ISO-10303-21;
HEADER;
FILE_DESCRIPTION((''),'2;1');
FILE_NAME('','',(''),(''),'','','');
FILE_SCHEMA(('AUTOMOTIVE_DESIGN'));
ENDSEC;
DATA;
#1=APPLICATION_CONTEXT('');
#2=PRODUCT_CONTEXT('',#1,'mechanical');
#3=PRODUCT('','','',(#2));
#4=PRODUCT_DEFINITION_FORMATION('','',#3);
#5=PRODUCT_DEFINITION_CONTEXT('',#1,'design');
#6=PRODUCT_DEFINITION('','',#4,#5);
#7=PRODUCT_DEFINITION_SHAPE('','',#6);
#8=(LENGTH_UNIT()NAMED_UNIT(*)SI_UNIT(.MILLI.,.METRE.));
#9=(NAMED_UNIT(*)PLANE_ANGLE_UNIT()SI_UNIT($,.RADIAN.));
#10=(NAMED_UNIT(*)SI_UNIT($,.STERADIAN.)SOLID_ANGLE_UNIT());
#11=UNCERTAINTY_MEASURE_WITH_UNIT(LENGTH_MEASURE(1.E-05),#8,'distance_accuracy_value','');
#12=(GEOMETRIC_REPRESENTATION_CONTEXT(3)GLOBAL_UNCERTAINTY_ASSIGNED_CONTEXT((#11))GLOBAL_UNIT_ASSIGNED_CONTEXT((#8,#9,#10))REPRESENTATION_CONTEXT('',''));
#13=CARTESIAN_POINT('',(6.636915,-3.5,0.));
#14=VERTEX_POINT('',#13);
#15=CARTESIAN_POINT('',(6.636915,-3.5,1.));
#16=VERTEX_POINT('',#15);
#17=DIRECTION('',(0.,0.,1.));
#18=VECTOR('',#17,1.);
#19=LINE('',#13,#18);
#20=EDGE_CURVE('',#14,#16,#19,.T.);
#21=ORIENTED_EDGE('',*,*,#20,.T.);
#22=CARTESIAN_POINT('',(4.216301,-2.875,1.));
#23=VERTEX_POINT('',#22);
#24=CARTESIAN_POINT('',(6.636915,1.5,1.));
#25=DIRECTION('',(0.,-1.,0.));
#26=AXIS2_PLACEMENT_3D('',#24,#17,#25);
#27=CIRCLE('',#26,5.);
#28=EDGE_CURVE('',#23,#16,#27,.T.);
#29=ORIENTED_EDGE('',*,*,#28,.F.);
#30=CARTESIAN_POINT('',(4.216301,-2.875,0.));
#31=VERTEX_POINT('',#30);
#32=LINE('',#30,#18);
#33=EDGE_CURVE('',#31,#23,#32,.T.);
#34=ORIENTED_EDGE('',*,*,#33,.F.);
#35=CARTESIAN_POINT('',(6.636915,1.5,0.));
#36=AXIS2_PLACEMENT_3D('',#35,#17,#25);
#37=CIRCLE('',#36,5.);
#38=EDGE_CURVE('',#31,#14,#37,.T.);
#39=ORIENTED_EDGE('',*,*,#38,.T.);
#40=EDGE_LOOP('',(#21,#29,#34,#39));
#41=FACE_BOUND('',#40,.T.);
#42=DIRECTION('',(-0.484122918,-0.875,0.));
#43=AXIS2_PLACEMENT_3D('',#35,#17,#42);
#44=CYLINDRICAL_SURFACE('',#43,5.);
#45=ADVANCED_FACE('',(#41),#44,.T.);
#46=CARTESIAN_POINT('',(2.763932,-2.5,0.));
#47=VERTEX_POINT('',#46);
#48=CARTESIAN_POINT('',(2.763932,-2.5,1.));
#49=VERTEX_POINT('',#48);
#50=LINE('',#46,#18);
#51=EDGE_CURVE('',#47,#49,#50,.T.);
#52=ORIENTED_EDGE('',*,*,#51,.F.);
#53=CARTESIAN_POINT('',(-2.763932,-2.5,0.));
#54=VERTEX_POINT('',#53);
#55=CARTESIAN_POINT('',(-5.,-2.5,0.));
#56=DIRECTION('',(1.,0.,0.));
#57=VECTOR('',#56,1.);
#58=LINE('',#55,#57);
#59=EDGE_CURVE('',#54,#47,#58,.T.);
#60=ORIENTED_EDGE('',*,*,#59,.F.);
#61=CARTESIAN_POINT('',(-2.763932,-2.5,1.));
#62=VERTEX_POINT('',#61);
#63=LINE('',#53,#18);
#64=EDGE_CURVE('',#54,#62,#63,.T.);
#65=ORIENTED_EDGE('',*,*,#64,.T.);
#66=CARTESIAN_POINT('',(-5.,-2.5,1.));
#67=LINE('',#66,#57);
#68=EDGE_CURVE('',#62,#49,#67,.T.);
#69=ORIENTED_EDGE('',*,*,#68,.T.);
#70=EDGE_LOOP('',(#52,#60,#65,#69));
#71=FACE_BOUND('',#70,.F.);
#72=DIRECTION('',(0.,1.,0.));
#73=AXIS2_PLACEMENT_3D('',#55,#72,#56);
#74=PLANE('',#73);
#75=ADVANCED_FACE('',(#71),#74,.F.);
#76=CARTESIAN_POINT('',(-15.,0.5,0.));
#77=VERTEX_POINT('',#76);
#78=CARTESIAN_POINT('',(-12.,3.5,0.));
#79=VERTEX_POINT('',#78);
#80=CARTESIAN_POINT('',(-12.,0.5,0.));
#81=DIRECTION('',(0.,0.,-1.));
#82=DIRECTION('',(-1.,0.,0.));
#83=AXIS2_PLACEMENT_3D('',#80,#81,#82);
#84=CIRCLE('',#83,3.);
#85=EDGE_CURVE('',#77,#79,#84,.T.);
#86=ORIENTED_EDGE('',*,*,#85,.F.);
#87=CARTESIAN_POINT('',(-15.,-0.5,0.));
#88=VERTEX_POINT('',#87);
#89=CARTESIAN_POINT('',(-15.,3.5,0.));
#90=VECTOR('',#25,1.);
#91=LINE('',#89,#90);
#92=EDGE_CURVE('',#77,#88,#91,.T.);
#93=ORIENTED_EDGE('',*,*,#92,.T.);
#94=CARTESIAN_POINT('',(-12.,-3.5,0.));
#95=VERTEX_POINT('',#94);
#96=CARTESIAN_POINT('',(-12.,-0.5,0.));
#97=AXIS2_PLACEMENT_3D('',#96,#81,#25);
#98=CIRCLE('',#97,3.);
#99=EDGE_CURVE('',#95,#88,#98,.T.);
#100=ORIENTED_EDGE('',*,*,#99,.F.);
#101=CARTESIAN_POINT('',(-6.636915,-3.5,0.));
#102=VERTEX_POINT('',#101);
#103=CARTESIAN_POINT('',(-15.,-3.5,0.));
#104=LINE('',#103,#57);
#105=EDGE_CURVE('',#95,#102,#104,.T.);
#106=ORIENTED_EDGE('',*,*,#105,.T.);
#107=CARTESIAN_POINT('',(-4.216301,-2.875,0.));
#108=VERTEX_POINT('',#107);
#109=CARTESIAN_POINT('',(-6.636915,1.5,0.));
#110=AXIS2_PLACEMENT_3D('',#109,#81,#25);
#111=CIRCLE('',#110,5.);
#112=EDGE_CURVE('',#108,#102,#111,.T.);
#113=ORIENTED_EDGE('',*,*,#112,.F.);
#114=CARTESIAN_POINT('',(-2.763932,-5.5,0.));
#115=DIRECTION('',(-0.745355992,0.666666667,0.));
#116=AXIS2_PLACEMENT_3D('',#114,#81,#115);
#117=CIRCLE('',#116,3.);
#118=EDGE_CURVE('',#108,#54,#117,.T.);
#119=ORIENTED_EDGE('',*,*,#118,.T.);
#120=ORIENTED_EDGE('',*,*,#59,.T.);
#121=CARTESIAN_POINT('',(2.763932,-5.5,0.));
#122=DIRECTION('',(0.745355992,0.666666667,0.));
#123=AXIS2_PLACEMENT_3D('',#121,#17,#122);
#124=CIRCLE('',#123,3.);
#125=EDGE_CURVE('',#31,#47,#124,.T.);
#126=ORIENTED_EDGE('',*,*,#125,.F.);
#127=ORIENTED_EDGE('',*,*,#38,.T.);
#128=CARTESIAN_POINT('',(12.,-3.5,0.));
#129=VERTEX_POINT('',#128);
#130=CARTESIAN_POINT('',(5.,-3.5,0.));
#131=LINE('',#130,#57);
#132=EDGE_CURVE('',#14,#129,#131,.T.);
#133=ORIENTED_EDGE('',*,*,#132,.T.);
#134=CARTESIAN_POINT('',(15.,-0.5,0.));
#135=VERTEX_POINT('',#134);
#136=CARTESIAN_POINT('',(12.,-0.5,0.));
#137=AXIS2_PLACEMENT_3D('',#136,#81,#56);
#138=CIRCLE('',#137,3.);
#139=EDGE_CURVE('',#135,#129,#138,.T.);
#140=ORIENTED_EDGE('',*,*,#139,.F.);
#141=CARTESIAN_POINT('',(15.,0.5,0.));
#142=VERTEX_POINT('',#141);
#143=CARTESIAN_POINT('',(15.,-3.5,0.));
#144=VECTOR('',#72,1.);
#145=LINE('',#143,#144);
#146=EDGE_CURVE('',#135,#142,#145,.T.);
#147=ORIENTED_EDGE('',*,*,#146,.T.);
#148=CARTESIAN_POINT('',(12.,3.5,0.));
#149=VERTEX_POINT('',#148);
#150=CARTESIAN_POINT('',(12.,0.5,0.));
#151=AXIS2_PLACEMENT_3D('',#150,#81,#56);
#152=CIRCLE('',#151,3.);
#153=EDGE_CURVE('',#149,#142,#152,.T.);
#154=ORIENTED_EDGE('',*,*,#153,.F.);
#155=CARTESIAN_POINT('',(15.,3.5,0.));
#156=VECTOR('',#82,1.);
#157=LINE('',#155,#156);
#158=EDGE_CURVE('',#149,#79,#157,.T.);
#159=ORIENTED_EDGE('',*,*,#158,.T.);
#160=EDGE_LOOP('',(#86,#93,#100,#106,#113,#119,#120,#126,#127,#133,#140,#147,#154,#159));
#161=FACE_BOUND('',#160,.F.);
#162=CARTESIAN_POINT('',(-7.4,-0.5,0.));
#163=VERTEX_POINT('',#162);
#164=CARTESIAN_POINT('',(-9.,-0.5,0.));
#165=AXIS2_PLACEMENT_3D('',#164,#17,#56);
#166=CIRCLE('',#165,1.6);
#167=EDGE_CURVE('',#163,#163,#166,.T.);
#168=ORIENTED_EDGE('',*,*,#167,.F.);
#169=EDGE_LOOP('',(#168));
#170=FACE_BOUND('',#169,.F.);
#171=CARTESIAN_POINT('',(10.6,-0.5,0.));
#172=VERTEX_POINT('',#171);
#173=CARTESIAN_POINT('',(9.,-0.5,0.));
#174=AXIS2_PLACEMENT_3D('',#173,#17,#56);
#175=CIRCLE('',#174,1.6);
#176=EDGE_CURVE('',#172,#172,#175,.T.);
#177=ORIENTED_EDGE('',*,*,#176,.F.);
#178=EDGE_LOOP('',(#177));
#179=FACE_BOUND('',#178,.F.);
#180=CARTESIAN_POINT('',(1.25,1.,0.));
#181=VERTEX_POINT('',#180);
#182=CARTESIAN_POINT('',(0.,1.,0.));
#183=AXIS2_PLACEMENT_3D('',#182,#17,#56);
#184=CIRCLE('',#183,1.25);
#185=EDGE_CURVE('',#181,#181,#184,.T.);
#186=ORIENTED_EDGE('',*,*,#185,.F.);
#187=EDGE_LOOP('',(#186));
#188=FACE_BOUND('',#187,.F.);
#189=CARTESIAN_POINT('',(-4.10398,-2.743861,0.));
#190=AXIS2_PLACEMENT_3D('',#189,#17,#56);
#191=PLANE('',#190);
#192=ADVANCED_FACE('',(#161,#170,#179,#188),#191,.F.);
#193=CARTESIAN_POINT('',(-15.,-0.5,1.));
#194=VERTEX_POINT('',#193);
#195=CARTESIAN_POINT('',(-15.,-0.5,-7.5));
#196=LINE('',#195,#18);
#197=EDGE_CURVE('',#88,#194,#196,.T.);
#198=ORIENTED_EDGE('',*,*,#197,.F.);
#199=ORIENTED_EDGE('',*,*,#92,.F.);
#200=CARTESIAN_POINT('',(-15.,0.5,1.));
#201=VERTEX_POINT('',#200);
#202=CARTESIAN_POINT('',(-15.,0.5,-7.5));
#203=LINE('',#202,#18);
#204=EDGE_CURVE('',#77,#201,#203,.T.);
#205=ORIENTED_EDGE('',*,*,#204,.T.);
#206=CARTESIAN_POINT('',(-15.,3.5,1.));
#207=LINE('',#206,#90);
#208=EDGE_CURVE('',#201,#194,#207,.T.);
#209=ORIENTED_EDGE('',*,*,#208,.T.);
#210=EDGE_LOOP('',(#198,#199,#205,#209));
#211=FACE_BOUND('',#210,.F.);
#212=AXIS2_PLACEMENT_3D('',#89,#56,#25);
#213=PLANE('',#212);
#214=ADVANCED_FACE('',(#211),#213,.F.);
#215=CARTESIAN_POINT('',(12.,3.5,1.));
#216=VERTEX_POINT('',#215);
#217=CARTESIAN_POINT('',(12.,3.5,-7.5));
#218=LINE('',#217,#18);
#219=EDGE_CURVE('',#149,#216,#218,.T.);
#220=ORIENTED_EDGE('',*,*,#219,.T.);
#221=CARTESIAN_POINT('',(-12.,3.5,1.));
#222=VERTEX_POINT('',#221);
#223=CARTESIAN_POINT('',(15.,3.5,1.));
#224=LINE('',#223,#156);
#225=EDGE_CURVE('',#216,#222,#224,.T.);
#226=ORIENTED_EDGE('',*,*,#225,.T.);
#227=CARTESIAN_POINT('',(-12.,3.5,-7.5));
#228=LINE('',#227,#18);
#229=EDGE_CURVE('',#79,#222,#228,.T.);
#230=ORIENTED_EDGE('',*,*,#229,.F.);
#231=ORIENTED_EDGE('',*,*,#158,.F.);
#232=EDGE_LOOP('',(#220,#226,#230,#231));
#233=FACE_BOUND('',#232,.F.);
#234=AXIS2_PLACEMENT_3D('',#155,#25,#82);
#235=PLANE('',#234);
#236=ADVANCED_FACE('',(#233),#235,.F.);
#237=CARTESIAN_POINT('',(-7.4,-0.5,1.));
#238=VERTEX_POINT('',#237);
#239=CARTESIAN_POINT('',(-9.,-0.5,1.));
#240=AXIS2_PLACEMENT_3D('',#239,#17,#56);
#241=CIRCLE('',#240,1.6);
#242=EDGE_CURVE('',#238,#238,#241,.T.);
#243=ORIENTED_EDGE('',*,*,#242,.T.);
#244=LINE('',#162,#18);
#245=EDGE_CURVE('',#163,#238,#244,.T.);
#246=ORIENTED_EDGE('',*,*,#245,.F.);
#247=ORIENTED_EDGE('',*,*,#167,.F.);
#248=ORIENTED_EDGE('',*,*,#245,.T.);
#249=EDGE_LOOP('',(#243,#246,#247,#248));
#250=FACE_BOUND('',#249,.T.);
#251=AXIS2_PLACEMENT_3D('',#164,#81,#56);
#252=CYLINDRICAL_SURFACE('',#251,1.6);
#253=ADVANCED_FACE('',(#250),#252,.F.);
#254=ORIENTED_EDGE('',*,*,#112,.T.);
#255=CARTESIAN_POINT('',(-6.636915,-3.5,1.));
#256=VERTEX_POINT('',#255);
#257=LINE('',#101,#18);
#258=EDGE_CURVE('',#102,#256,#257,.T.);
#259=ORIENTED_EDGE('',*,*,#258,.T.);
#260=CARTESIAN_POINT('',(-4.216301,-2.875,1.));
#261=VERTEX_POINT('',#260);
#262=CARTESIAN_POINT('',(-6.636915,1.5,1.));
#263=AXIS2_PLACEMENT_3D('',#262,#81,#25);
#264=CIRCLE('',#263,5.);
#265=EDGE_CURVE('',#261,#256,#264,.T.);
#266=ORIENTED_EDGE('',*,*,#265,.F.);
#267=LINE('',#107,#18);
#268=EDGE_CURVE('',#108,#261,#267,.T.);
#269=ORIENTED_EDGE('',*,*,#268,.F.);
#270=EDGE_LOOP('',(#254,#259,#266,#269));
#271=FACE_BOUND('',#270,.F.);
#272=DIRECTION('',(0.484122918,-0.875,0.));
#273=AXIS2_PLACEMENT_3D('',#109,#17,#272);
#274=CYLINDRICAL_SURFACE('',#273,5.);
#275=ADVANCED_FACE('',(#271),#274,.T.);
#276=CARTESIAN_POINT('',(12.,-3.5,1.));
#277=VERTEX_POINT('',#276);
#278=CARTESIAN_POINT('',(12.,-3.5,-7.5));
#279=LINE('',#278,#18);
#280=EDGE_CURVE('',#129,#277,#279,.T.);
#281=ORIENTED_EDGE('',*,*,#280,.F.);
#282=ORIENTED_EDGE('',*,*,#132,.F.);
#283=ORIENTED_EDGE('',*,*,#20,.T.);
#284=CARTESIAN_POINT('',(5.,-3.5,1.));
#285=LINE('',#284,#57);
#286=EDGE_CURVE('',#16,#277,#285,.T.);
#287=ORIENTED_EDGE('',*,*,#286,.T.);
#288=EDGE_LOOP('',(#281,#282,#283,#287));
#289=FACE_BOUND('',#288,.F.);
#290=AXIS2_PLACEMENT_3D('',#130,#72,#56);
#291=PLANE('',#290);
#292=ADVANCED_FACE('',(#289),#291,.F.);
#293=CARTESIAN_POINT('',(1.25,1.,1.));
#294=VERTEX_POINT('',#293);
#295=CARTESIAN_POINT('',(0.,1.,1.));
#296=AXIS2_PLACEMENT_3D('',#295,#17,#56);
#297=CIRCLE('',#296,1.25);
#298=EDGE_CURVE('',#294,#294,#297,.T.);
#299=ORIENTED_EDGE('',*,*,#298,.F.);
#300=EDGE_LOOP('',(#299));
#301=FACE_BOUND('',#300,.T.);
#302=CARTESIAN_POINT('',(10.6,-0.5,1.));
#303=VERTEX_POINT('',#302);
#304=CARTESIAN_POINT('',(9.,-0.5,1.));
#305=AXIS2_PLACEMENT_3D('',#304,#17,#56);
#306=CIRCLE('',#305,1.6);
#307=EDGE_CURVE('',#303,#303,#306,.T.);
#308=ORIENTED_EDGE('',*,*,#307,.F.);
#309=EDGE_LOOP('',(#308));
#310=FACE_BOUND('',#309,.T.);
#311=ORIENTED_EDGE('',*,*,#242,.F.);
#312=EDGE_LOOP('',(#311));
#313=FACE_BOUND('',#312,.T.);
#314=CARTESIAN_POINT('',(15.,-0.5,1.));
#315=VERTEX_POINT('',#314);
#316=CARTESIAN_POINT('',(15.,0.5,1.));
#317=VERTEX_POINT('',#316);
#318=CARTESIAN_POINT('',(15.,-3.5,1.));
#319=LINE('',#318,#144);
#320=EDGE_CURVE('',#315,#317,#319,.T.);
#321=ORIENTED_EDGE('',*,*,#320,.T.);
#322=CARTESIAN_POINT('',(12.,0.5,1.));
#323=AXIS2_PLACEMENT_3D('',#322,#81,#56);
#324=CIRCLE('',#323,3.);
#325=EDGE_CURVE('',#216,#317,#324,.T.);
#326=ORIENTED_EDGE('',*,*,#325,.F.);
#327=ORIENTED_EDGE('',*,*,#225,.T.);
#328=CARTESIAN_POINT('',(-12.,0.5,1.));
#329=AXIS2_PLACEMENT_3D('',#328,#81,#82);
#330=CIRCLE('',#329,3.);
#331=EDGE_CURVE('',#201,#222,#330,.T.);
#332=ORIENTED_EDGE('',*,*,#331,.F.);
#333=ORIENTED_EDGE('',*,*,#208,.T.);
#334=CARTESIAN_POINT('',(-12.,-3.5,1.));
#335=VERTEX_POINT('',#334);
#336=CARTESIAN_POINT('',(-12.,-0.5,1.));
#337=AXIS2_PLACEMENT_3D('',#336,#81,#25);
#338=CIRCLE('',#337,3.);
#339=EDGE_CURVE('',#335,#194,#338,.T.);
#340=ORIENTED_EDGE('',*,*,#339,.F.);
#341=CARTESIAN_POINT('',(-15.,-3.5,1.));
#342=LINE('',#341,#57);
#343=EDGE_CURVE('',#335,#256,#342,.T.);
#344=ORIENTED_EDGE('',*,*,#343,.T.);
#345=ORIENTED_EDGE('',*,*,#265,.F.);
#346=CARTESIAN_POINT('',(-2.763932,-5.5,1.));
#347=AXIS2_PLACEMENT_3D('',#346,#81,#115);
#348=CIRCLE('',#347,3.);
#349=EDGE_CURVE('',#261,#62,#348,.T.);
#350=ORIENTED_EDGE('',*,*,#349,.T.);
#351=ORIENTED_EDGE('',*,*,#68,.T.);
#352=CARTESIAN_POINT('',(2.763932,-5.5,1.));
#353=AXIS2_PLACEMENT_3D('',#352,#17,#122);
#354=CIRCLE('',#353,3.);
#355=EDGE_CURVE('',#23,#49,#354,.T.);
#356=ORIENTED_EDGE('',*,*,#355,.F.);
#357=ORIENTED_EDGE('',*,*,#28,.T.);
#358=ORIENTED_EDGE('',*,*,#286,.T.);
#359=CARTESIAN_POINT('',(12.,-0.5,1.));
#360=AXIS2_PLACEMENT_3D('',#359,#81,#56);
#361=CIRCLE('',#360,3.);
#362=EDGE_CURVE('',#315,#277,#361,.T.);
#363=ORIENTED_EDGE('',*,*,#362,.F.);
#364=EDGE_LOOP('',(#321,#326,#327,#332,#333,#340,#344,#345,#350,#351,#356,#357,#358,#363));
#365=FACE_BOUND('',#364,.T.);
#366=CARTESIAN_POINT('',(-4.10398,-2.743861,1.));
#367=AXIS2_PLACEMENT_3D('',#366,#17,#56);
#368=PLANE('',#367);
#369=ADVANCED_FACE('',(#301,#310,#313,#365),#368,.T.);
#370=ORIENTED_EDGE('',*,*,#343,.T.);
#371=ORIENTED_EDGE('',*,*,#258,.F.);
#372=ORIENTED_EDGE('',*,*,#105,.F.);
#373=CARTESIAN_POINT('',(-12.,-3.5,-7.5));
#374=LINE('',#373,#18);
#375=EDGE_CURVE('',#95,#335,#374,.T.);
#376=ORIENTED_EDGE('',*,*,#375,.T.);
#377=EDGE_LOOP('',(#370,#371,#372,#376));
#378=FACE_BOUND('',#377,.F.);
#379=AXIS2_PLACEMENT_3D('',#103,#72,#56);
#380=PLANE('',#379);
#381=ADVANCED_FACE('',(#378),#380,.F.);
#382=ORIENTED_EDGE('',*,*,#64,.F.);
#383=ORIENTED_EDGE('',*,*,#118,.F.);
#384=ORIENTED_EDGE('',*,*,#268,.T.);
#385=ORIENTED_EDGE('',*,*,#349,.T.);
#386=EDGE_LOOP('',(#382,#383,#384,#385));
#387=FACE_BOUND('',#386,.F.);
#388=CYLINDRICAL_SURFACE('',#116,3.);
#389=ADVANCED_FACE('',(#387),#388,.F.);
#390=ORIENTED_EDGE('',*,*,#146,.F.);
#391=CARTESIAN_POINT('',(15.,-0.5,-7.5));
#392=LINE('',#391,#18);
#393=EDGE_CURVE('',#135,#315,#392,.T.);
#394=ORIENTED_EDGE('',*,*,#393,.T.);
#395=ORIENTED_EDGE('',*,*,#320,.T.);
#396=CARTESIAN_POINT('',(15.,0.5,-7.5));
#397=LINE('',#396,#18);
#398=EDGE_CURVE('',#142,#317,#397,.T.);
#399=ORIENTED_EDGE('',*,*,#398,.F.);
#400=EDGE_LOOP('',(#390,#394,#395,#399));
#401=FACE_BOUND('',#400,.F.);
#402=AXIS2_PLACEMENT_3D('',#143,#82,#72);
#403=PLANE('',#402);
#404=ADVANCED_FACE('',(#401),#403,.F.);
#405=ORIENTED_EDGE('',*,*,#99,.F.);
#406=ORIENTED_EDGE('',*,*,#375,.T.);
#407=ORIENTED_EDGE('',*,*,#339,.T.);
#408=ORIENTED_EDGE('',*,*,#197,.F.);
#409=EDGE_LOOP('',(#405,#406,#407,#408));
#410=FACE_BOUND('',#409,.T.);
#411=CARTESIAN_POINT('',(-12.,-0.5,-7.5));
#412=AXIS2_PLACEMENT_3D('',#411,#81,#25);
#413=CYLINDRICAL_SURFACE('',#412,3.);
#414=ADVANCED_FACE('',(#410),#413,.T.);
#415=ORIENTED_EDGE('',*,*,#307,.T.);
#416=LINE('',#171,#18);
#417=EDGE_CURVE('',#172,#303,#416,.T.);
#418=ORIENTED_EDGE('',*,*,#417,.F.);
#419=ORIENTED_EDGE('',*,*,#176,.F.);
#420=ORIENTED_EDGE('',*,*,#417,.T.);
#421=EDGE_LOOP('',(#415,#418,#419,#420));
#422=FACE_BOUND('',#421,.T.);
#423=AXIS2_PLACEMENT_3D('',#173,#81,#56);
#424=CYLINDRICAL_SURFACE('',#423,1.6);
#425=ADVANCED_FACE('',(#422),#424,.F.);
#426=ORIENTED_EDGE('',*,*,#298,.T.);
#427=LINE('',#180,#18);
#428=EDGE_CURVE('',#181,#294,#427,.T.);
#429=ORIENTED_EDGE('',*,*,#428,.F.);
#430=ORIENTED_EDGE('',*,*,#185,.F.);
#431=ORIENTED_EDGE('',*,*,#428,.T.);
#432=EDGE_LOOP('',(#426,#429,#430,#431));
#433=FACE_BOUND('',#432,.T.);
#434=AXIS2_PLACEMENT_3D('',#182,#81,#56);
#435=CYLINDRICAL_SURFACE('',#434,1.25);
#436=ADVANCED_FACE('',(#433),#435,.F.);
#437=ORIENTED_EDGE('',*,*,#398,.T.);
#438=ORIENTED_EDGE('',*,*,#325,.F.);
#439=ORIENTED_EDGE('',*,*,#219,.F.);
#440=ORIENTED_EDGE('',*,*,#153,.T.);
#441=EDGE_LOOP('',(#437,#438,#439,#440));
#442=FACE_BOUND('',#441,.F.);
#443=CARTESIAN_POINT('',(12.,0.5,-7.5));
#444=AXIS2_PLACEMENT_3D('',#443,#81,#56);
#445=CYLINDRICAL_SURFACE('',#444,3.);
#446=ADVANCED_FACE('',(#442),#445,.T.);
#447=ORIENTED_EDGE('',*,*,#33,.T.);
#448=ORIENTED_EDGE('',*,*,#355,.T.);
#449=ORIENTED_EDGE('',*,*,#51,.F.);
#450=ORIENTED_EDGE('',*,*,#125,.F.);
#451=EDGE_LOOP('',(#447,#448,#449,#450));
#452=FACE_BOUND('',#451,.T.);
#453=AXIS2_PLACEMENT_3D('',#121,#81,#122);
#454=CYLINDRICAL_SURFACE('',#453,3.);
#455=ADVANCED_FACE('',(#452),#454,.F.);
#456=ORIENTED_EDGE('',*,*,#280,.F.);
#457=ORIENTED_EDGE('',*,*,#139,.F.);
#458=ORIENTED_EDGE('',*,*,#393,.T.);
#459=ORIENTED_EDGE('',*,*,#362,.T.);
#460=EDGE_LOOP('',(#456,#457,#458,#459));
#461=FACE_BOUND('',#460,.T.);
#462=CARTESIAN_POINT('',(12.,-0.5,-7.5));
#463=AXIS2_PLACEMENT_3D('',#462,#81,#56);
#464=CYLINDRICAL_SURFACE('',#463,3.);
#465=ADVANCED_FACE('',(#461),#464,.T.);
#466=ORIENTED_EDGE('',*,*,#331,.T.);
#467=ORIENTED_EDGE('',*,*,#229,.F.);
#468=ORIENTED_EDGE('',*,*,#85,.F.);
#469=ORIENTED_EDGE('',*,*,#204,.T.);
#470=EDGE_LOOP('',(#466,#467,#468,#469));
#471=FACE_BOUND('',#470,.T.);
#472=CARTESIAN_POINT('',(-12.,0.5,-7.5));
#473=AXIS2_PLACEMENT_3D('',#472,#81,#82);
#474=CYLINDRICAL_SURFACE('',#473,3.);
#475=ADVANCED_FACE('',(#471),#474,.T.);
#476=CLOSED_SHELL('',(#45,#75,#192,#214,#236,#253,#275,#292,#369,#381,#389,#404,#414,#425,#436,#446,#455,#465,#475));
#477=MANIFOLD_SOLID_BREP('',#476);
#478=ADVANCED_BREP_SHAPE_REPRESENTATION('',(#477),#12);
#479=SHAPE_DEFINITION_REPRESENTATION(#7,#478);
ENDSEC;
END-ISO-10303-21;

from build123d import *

# Parameters (mm, degrees)
F0_R         = 1.6
F0_R_2       = 1.25
F1_DEPTH     = 1
F2_T1_DEPTH  = 1
F2_T3_DEPTH  = 1
F2_T5_DEPTH  = 16
F2_T7_DEPTH  = 16
F2_T9_DEPTH  = 16
F2_T11_DEPTH = 16
F3_R         = 5


# Not quite as in the source:
# - a fillet or chamfer that OpenCascade refuses, or shapes differently, is made with other operations: its cross-section is extruded or revolved along the edge and cut away or added


with BuildPart() as f1:
    # F0 (on Top) → F1 (new body)
    with BuildSketch(Plane.XY):
        Polygon((15, -3.5), (15, 3.5), (5, 3.5), (-5, 3.5), (-15, 3.5), (-15, -3.5), (-5, -3.5), (-5, -2.5), (5, -2.5), (5, -3.5), align=None)
        with Locations((-9, -0.5)):
            Circle(F0_R, mode=Mode.SUBTRACT)
        with Locations((9, -0.5)):
            Circle(F0_R, mode=Mode.SUBTRACT)
        with Locations((0, 1)):
            Circle(F0_R_2, mode=Mode.SUBTRACT)
    extrude(amount=F1_DEPTH)

    # F2: fillet of radius 3 on 6 edges, made by hand

    # F2_s2 → F2_t1 (join)
    with BuildSketch(Plane.XY):
        with BuildLine():
            ThreePointArc((5, -3.5), (3.9886768939, -2.7613872125), (2.7639320225, -2.5))
            Line((2.7639320225, -2.5), (5, -2.5))
            Line((5, -2.5), (5, -3.5))
        make_face()
    extrude(amount=F2_T1_DEPTH)

    # F2_s4 → F2_t3 (join)
    with BuildSketch(Plane.XY):
        with BuildLine():
            ThreePointArc((-5, -3.5), (-3.9886768939, -2.7613872125), (-2.7639320225, -2.5))
            Line((-2.7639320225, -2.5), (-5, -2.5))
            Line((-5, -2.5), (-5, -3.5))
        make_face()
    extrude(amount=F2_T3_DEPTH)

    # F2_s6 → F2_t5 (cut)
    with BuildSketch(Plane.XY.offset(-7.5)):
        with BuildLine():
            ThreePointArc((15, -0.5), (14.1213203436, -2.6213203436), (12, -3.5))
            Line((12, -3.5), (15, -3.5))
            Line((15, -3.5), (15, -0.5))
        make_face()
    extrude(amount=F2_T5_DEPTH, mode=Mode.SUBTRACT)

    # F2_s8 → F2_t7 (cut)
    with BuildSketch(Plane.XY.offset(-7.5)):
        with BuildLine():
            ThreePointArc((15, 0.5), (14.1213203436, 2.6213203436), (12, 3.5))
            Line((12, 3.5), (15, 3.5))
            Line((15, 3.5), (15, 0.5))
        make_face()
    extrude(amount=F2_T7_DEPTH, mode=Mode.SUBTRACT)

    # F2_s10 → F2_t9 (cut)
    with BuildSketch(Plane.XY.offset(-7.5)):
        with BuildLine():
            ThreePointArc((-12, -3.5), (-14.1213203436, -2.6213203436), (-15, -0.5))
            Line((-15, -0.5), (-15, -3.5))
            Line((-15, -3.5), (-12, -3.5))
        make_face()
    extrude(amount=F2_T9_DEPTH, mode=Mode.SUBTRACT)

    # F2_s12 → F2_t11 (cut)
    with BuildSketch(Plane.XY.offset(-7.5)):
        with BuildLine():
            ThreePointArc((-15, 0.5), (-14.1213203436, 2.6213203436), (-12, 3.5))
            Line((-12, 3.5), (-15, 3.5))
            Line((-15, 3.5), (-15, 0.5))
        make_face()
    extrude(amount=F2_T11_DEPTH, mode=Mode.SUBTRACT)

    # F3
    f3_edges = [f1.edges().sort_by_distance(p)[0] for p in [
        (-5, -3.5, 0.5),
        (5, -3.5, 0.5),
    ]]
    fillet(f3_edges, radius=F3_R)


solid = f1.part
